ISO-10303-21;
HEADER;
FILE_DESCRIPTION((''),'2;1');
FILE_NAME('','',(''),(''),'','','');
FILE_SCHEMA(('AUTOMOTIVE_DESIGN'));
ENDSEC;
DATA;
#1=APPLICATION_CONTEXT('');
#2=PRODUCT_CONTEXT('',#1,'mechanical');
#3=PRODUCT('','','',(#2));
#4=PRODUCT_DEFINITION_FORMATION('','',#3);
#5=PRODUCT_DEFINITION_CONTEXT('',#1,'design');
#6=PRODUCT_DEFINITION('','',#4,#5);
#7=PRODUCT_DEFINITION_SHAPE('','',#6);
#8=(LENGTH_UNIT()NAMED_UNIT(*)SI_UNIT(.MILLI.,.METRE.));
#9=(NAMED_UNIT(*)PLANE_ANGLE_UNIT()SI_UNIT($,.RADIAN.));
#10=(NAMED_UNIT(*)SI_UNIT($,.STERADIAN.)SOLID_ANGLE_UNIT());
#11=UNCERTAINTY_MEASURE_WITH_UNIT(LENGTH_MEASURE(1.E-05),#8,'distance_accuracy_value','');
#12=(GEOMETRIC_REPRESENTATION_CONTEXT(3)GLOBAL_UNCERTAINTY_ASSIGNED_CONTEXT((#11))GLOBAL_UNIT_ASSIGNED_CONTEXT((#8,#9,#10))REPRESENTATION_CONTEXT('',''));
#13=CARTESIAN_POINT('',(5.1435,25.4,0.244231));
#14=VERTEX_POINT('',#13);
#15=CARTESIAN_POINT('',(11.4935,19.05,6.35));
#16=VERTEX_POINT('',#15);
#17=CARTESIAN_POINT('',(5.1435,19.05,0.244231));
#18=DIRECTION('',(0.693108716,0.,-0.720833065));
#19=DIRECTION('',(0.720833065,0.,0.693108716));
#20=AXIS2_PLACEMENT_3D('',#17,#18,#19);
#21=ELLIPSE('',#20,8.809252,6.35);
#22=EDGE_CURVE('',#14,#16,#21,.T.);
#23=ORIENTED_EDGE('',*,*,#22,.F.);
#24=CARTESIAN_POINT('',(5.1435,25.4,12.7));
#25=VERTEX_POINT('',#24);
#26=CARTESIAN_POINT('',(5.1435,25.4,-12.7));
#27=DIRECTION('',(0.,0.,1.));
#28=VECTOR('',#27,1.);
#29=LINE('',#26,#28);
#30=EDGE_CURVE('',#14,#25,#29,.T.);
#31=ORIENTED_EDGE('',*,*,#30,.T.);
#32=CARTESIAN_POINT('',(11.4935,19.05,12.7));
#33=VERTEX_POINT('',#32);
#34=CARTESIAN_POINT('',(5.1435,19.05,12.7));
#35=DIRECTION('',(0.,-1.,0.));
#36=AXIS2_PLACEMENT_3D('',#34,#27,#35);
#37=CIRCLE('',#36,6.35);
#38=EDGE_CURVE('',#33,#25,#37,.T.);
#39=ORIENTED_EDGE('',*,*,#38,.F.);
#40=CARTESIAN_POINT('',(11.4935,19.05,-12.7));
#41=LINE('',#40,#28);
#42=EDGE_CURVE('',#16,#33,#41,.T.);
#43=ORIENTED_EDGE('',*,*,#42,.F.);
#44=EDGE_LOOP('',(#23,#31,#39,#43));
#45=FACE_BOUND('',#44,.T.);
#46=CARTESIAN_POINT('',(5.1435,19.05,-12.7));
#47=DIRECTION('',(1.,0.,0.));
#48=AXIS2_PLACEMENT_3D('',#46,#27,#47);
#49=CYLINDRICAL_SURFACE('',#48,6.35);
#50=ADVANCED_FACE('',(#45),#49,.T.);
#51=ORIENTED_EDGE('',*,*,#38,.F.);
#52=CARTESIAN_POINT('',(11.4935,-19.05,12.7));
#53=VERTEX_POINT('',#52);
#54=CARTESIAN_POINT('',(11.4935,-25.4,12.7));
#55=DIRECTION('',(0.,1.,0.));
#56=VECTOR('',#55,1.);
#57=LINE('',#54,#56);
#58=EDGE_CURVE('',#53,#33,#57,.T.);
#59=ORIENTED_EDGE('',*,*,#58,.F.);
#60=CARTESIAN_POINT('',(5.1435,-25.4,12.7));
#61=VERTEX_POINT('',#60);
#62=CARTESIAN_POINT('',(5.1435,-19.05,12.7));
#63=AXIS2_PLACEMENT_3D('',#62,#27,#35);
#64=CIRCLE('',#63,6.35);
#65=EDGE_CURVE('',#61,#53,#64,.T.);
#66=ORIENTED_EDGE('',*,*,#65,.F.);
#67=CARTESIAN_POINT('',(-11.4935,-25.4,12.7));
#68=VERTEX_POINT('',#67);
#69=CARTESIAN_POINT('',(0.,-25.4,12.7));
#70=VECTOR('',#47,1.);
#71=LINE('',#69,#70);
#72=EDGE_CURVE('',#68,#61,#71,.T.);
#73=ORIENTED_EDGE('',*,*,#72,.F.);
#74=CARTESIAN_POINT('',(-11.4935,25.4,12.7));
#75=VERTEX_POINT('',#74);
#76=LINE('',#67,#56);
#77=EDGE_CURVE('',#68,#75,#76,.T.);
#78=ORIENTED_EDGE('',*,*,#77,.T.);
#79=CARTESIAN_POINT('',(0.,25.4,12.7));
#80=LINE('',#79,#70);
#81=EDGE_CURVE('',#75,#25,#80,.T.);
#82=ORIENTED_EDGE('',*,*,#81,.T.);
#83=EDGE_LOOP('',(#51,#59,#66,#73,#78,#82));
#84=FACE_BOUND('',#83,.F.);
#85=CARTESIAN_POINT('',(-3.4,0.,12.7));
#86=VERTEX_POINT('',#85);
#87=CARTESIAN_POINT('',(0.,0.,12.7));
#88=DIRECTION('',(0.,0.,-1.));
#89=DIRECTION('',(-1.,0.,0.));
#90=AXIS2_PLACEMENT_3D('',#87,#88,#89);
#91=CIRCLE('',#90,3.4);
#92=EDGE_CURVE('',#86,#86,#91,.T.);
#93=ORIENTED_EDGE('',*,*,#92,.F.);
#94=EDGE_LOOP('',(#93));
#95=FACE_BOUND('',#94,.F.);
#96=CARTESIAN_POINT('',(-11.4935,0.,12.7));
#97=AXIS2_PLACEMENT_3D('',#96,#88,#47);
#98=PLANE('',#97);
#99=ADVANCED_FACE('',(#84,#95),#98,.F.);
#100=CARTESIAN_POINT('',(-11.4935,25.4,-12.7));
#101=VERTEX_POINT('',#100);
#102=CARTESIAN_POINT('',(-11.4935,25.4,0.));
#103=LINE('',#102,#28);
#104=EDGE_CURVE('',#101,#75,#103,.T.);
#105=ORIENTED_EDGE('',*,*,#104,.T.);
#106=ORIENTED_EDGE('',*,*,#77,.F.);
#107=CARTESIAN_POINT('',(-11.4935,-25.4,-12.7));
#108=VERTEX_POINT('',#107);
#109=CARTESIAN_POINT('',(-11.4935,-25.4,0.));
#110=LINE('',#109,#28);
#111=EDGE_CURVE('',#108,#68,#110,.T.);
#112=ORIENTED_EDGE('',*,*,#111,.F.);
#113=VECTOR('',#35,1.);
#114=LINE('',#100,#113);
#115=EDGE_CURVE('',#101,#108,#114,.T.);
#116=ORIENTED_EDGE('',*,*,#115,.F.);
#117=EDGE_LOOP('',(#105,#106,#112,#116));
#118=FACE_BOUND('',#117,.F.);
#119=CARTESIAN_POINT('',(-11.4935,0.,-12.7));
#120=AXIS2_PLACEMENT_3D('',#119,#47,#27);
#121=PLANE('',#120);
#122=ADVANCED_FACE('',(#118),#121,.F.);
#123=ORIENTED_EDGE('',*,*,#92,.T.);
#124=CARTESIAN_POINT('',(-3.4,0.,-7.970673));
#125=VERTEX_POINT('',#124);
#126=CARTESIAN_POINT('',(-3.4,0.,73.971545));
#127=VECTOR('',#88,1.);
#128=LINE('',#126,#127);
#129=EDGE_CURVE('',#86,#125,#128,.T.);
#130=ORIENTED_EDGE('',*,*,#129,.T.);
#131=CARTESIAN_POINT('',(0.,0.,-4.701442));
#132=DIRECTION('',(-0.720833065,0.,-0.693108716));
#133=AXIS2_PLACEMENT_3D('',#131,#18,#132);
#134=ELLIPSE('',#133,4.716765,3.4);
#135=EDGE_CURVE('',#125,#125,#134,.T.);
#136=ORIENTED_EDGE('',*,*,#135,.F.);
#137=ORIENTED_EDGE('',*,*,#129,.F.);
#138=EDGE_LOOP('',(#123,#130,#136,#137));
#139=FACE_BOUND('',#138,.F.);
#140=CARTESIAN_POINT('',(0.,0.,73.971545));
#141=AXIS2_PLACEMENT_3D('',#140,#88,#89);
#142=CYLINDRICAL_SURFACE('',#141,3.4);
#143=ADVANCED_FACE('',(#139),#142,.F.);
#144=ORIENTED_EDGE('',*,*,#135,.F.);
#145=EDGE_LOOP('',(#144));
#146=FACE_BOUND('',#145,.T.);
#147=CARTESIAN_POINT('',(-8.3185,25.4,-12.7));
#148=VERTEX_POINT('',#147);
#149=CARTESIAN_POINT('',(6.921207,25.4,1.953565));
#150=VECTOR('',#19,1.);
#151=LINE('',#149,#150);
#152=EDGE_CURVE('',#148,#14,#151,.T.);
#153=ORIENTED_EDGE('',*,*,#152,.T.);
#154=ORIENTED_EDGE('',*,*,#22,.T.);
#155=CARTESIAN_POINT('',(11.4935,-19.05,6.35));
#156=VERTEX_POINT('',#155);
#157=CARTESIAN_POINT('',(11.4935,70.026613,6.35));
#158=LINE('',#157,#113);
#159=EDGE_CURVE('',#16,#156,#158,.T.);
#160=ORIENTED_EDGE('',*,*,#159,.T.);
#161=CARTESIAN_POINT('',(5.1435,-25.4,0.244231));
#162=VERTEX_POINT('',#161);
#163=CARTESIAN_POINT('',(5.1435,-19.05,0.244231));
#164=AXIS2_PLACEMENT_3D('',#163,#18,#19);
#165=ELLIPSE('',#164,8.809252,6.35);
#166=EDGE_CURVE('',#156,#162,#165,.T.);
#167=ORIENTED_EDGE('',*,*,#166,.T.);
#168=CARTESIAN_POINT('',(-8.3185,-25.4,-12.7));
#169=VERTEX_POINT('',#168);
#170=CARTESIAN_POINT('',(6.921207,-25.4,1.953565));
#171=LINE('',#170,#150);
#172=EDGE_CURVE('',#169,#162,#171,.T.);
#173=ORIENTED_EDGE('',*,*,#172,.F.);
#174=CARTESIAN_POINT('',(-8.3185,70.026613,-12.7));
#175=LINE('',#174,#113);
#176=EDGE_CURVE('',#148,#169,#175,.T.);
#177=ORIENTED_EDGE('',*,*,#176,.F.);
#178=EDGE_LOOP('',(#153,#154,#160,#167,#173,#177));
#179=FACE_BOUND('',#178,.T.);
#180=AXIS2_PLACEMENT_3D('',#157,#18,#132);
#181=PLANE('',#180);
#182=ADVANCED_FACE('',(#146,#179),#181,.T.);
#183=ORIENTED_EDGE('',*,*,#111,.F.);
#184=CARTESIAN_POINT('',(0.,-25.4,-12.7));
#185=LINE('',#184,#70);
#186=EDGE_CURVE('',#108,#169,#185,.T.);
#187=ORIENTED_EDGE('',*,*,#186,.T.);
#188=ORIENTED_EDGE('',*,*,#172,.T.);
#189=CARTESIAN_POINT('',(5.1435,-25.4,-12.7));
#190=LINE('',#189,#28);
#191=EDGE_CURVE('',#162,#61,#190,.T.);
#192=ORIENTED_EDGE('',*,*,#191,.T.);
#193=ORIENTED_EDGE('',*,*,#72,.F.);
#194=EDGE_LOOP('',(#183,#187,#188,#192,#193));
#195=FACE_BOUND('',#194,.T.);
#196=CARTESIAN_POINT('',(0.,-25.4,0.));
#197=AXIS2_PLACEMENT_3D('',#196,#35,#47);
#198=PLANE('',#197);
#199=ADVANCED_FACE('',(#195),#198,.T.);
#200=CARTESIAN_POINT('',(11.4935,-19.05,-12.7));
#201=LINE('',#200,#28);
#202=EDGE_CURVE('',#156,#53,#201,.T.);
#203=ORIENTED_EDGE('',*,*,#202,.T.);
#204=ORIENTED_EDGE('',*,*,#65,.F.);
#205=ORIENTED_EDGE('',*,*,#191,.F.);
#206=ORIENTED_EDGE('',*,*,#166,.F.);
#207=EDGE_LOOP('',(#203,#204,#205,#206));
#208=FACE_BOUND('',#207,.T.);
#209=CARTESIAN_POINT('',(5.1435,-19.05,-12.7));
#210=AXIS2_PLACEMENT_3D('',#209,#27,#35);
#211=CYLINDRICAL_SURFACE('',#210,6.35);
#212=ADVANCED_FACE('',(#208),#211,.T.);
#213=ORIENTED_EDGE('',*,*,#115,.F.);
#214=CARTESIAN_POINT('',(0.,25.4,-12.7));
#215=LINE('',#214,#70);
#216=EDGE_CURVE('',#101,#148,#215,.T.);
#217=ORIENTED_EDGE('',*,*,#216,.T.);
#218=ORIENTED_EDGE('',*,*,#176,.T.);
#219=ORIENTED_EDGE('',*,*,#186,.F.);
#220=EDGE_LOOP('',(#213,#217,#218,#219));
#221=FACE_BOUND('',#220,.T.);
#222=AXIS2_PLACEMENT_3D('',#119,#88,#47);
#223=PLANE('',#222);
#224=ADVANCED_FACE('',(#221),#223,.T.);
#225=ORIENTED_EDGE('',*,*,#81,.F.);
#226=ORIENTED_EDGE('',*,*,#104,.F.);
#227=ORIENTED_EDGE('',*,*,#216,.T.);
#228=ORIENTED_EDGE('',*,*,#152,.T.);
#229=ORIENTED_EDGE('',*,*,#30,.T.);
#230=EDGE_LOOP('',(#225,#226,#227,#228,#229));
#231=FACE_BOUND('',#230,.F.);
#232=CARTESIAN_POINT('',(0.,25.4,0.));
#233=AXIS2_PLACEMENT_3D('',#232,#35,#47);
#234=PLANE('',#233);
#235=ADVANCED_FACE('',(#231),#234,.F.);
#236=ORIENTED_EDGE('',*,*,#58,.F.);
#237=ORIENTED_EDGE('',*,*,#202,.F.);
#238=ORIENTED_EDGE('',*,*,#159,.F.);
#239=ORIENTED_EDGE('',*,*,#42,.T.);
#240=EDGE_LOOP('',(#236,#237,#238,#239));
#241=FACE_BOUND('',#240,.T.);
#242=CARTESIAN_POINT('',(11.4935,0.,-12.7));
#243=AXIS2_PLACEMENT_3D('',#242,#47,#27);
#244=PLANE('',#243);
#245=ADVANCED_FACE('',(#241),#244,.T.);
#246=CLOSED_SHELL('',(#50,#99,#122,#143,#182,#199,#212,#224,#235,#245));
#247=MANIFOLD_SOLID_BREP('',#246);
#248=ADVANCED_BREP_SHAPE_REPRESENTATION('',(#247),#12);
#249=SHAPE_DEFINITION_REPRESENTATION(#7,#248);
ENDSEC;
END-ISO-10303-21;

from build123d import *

# Parameters (mm, degrees)
F0_W        = 22.987
F0_H        = 25.4
F1_DEPTH    = 25.4
F2_R        = 6.35
F4_D        = 6.8
F5_T1_DEPTH = 140.0532259942


# Not quite as in the source:
# - a fillet or chamfer that OpenCascade refuses, or shapes differently, is made with other operations: its cross-section is extruded or revolved along the edge and cut away or added


with BuildPart() as f1:
    # F0 (on Front) → F1 (new body, symmetric)
    with BuildSketch(Plane.XZ):
        Rectangle(F0_W, F0_H)
    extrude(amount=F1_DEPTH, both=True)

    # F2
    f2_edges = [f1.edges().sort_by_distance(p)[0] for p in [
        (11.4935, 25.4, 0),
        (11.4935, -25.4, 0),
    ]]
    fillet(f2_edges, radius=F2_R)

    # F4 (through all)
    with Locations(Plane.XY.offset(12.7)):
        with Locations((0, 0)):
            Hole(F4_D / 2)

    # F5: chamfer of 19.05 x 19.812 on 1 edges, made by hand

    # F5_s2 → F5_t1 (cut)
    with BuildSketch(Plane.XZ.offset(-70.0266129971)):
        Polygon((11.4935, 6.35), (-8.3185, -12.7), (11.4935, -12.7), align=None)
    extrude(amount=F5_T1_DEPTH, mode=Mode.SUBTRACT)


solid = f1.part
